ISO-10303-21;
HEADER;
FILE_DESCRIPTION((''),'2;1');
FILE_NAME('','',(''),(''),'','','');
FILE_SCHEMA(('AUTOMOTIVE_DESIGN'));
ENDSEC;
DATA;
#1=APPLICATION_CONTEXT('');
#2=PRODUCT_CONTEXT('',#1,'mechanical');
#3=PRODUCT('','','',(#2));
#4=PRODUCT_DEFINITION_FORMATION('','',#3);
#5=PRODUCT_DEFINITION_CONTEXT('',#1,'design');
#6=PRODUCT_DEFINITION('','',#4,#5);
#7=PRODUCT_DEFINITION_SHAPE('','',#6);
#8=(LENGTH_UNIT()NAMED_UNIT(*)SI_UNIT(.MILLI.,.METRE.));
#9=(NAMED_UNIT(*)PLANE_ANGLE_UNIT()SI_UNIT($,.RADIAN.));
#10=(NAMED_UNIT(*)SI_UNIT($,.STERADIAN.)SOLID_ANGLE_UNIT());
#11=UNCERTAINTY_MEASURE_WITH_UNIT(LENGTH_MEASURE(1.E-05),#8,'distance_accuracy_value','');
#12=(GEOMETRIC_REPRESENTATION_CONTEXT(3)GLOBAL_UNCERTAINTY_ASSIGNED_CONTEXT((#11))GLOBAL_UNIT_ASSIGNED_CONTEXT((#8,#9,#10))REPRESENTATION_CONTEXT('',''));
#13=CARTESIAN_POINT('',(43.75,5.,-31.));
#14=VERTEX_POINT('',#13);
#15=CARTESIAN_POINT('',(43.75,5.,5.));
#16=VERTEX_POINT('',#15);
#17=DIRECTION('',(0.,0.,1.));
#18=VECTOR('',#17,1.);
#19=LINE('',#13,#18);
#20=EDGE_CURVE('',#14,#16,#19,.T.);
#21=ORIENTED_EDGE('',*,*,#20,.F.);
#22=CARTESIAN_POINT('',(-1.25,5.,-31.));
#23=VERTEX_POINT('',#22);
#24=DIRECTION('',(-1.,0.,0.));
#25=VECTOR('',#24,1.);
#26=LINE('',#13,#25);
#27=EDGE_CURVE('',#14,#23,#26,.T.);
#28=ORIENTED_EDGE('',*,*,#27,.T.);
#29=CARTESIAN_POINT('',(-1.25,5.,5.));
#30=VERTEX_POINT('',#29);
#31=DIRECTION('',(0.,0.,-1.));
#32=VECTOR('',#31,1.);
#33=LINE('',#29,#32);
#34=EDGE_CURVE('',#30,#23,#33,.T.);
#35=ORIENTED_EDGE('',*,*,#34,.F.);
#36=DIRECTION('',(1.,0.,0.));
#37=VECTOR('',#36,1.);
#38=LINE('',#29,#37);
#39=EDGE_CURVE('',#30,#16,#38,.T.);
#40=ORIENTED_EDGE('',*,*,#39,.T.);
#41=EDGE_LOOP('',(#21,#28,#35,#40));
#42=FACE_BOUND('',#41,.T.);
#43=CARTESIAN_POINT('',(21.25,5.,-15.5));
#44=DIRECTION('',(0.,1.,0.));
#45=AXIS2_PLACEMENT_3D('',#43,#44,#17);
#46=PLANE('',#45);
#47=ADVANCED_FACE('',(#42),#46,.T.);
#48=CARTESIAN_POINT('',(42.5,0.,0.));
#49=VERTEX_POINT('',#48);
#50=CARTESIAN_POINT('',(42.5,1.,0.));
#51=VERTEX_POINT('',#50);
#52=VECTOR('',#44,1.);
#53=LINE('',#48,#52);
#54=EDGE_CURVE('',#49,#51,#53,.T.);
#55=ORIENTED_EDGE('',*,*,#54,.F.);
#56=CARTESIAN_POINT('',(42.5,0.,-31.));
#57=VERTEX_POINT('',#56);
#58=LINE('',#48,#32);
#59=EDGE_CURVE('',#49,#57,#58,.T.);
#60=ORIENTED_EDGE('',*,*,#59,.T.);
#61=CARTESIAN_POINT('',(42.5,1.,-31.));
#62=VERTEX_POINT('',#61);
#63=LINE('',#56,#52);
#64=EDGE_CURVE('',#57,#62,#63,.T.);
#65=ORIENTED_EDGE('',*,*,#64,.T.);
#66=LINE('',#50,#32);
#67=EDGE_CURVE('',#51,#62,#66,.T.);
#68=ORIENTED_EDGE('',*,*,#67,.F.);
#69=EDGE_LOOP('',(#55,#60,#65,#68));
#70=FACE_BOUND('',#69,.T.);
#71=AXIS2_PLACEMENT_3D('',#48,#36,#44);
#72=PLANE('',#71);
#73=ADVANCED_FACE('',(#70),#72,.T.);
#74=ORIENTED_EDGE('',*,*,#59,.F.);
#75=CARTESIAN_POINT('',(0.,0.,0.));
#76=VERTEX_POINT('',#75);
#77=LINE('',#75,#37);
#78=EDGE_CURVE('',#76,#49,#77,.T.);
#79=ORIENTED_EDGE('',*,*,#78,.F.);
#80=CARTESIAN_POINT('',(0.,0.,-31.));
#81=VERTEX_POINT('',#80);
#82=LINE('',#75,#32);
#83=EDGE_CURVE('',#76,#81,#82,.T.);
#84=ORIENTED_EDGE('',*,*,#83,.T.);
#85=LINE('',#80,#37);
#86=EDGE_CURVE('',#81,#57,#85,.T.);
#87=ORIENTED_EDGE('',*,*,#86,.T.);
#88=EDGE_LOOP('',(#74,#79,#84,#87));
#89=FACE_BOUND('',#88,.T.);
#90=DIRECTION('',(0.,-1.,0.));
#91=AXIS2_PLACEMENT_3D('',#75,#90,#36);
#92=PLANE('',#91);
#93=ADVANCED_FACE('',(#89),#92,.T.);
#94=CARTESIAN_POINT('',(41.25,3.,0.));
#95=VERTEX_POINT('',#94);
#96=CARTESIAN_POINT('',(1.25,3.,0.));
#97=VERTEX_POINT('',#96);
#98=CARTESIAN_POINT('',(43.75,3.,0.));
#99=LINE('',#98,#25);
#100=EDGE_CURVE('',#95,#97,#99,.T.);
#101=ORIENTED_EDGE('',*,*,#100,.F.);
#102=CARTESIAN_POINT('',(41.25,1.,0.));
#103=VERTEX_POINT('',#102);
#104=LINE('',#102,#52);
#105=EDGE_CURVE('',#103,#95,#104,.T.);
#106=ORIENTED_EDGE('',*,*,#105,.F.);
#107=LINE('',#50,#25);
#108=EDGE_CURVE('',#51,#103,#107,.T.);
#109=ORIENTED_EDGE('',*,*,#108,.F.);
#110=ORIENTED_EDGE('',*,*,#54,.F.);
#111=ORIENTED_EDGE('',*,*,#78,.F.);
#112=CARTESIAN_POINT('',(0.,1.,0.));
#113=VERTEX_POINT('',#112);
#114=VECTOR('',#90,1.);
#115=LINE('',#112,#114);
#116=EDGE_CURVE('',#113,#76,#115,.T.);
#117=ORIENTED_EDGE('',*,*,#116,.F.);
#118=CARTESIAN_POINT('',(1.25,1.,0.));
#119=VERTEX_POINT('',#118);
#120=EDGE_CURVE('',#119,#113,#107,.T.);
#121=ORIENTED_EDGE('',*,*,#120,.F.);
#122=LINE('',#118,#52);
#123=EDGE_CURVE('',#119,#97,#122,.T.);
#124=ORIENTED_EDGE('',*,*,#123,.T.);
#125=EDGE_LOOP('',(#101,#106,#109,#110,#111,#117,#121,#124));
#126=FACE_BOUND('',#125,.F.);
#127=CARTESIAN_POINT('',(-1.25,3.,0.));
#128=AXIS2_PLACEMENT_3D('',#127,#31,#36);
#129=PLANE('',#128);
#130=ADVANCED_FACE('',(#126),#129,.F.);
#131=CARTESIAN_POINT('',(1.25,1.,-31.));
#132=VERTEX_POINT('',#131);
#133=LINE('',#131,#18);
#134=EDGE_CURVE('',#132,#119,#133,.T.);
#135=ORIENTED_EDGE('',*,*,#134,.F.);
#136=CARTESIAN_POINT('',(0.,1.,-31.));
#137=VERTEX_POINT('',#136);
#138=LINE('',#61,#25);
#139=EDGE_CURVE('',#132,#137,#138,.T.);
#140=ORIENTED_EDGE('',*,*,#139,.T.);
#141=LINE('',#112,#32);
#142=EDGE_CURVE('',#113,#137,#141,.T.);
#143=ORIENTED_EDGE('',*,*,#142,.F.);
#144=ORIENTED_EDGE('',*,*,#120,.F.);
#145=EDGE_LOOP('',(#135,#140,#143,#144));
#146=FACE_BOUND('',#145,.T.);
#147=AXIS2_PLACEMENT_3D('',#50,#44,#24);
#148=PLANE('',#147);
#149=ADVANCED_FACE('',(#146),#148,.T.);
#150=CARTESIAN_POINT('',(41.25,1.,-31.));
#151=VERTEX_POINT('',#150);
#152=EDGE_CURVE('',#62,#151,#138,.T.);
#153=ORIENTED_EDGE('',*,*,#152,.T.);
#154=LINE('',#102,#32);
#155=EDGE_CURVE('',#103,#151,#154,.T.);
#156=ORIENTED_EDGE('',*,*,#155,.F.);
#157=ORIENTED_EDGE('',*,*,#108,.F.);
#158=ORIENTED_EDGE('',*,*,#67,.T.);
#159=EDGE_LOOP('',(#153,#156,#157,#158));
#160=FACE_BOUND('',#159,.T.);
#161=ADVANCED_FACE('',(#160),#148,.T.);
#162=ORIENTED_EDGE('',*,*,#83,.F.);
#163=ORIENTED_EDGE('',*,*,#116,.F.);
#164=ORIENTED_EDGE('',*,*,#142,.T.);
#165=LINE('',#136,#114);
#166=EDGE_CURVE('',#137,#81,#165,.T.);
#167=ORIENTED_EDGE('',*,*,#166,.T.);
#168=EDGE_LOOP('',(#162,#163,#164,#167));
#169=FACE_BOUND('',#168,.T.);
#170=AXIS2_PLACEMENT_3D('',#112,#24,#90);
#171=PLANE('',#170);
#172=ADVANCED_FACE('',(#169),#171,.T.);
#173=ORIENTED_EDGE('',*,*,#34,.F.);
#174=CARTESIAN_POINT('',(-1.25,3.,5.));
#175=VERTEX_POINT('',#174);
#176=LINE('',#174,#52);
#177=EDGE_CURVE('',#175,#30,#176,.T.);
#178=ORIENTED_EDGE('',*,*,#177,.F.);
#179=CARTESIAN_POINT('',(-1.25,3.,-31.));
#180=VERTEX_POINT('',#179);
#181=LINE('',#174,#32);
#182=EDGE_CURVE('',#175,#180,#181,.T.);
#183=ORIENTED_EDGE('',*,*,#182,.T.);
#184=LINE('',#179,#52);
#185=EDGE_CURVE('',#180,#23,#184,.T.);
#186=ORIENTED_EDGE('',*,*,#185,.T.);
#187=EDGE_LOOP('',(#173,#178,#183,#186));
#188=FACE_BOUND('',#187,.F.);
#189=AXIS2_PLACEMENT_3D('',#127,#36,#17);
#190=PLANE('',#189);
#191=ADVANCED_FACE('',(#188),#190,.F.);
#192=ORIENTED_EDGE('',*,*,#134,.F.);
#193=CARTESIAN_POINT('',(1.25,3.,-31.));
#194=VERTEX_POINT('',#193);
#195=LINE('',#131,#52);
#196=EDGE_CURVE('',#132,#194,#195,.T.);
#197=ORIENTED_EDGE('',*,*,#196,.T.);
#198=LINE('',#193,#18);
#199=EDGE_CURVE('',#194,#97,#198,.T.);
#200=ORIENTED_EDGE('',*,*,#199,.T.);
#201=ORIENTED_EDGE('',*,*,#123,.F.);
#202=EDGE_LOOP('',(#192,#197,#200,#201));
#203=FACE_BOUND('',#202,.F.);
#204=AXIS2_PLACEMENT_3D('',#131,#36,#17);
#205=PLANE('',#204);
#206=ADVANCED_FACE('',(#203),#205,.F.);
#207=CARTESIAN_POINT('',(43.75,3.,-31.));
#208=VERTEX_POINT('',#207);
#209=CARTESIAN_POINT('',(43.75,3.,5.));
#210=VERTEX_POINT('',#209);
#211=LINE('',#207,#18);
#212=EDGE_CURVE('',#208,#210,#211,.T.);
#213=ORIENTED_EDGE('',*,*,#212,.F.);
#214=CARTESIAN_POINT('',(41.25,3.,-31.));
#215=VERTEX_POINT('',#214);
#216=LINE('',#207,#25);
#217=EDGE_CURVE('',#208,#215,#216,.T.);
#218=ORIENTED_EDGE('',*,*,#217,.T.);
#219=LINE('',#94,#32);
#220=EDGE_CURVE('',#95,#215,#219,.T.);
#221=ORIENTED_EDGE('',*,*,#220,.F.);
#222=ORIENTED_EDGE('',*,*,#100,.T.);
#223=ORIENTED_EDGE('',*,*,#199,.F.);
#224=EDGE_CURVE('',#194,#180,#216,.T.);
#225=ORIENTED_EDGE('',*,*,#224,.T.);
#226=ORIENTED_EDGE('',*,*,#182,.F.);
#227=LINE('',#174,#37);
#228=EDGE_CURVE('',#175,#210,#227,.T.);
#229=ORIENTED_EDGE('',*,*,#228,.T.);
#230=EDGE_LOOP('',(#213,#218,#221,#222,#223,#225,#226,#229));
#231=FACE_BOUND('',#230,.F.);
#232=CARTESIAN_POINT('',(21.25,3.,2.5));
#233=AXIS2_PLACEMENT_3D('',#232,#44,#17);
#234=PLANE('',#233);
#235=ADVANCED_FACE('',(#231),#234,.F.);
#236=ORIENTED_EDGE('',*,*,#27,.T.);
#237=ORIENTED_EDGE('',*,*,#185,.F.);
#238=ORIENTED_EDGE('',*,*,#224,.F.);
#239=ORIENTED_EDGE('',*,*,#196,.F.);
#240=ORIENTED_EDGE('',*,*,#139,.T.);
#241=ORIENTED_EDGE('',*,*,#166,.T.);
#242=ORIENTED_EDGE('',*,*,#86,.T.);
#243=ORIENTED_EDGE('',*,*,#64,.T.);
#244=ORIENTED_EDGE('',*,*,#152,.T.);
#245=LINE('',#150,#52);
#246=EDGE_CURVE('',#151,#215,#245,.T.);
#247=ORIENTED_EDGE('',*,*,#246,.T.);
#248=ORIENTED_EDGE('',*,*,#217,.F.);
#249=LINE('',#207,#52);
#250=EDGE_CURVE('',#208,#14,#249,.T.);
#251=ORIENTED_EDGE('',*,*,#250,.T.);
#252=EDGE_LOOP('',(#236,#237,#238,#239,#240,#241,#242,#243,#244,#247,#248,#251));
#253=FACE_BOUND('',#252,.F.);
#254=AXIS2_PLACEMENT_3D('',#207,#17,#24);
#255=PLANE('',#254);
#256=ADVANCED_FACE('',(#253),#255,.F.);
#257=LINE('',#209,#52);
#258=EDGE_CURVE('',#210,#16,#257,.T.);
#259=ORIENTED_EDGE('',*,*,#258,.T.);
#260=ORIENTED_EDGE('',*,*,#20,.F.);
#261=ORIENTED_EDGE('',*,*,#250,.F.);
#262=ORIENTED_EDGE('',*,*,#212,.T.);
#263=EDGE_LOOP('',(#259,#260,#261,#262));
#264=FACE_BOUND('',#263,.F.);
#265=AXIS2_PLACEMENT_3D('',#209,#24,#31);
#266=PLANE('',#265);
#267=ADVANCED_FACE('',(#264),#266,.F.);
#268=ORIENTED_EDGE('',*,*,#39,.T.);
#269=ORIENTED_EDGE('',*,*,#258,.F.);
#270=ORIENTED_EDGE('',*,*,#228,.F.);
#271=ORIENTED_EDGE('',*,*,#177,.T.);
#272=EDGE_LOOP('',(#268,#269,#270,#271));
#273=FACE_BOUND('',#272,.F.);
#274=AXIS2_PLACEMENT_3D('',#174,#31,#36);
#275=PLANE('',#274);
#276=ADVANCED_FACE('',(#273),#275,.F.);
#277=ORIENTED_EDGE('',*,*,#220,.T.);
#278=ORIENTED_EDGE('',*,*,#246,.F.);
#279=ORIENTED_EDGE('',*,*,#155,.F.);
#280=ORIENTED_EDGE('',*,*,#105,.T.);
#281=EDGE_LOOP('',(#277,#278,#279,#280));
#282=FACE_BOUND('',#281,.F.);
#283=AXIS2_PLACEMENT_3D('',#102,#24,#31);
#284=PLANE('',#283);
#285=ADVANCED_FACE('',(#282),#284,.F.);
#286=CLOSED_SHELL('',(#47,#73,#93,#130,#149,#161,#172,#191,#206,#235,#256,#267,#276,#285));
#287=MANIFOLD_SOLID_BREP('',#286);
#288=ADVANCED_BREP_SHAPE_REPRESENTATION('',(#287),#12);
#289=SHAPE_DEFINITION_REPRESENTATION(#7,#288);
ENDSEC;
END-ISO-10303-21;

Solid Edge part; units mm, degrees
sketch "Sketch1" plane through (0, 0, 0) normal (0, 0, 1) x (1, 0, 0)
  line L0 (42.5, 1) -> (0, 1)
  line L1 (0, 1) -> (0, 0)
  line L2 (0, 0) -> (42.5, 0)
  line L3 (42.5, 0) -> (42.5, 1)
extrude "Protrusion1" add sketch "Sketch1" against normal blind 31
sketch "Sketch2" plane through (21.25, 1, -15.5) normal (0, 1, 0) x (1, 0, 0)
  line L0 (20, -15.5) -> (20, 15.5)
  line L1 (20, 15.5) -> (-20, 15.5)
  line L2 (-20, 15.5) -> (-20, -15.5)
  line L3 (-20, -15.5) -> (20, -15.5)
extrude "Vysunutí_2" add sketch "Sketch2" along normal blind 2
sketch "Sketch3" plane through (21.25, 3, -15.5) normal (0, 1, 0) x (1, 0, 0)
  line L0 (-22.5, -15.5) -> (22.5, -15.5)
  line L1 (22.5, -15.5) -> (22.5, 15.5)
  line L2 (22.5, 15.5) -> (-22.5, 15.5)
  line L3 (-22.5, 15.5) -> (-22.5, -15.5)
extrude "Vysunutí_3" add sketch "Sketch3" along normal blind 2
sketch "Sketch4" plane through (21.25, 3, -15.5) normal (0, 1, 0) x (1, 0, 0)
  line L0 (22.5, -20.5) -> (22.5, -15.5)
  line L1 (-22.5, -20.5) -> (22.5, -20.5)
  line L2 (-22.5, -15.5) -> (-22.5, -20.5)
extrude "Protrusion2" add sketch "Sketch4" along normal blind 2 material side at (43.8, 3, 2.5)
